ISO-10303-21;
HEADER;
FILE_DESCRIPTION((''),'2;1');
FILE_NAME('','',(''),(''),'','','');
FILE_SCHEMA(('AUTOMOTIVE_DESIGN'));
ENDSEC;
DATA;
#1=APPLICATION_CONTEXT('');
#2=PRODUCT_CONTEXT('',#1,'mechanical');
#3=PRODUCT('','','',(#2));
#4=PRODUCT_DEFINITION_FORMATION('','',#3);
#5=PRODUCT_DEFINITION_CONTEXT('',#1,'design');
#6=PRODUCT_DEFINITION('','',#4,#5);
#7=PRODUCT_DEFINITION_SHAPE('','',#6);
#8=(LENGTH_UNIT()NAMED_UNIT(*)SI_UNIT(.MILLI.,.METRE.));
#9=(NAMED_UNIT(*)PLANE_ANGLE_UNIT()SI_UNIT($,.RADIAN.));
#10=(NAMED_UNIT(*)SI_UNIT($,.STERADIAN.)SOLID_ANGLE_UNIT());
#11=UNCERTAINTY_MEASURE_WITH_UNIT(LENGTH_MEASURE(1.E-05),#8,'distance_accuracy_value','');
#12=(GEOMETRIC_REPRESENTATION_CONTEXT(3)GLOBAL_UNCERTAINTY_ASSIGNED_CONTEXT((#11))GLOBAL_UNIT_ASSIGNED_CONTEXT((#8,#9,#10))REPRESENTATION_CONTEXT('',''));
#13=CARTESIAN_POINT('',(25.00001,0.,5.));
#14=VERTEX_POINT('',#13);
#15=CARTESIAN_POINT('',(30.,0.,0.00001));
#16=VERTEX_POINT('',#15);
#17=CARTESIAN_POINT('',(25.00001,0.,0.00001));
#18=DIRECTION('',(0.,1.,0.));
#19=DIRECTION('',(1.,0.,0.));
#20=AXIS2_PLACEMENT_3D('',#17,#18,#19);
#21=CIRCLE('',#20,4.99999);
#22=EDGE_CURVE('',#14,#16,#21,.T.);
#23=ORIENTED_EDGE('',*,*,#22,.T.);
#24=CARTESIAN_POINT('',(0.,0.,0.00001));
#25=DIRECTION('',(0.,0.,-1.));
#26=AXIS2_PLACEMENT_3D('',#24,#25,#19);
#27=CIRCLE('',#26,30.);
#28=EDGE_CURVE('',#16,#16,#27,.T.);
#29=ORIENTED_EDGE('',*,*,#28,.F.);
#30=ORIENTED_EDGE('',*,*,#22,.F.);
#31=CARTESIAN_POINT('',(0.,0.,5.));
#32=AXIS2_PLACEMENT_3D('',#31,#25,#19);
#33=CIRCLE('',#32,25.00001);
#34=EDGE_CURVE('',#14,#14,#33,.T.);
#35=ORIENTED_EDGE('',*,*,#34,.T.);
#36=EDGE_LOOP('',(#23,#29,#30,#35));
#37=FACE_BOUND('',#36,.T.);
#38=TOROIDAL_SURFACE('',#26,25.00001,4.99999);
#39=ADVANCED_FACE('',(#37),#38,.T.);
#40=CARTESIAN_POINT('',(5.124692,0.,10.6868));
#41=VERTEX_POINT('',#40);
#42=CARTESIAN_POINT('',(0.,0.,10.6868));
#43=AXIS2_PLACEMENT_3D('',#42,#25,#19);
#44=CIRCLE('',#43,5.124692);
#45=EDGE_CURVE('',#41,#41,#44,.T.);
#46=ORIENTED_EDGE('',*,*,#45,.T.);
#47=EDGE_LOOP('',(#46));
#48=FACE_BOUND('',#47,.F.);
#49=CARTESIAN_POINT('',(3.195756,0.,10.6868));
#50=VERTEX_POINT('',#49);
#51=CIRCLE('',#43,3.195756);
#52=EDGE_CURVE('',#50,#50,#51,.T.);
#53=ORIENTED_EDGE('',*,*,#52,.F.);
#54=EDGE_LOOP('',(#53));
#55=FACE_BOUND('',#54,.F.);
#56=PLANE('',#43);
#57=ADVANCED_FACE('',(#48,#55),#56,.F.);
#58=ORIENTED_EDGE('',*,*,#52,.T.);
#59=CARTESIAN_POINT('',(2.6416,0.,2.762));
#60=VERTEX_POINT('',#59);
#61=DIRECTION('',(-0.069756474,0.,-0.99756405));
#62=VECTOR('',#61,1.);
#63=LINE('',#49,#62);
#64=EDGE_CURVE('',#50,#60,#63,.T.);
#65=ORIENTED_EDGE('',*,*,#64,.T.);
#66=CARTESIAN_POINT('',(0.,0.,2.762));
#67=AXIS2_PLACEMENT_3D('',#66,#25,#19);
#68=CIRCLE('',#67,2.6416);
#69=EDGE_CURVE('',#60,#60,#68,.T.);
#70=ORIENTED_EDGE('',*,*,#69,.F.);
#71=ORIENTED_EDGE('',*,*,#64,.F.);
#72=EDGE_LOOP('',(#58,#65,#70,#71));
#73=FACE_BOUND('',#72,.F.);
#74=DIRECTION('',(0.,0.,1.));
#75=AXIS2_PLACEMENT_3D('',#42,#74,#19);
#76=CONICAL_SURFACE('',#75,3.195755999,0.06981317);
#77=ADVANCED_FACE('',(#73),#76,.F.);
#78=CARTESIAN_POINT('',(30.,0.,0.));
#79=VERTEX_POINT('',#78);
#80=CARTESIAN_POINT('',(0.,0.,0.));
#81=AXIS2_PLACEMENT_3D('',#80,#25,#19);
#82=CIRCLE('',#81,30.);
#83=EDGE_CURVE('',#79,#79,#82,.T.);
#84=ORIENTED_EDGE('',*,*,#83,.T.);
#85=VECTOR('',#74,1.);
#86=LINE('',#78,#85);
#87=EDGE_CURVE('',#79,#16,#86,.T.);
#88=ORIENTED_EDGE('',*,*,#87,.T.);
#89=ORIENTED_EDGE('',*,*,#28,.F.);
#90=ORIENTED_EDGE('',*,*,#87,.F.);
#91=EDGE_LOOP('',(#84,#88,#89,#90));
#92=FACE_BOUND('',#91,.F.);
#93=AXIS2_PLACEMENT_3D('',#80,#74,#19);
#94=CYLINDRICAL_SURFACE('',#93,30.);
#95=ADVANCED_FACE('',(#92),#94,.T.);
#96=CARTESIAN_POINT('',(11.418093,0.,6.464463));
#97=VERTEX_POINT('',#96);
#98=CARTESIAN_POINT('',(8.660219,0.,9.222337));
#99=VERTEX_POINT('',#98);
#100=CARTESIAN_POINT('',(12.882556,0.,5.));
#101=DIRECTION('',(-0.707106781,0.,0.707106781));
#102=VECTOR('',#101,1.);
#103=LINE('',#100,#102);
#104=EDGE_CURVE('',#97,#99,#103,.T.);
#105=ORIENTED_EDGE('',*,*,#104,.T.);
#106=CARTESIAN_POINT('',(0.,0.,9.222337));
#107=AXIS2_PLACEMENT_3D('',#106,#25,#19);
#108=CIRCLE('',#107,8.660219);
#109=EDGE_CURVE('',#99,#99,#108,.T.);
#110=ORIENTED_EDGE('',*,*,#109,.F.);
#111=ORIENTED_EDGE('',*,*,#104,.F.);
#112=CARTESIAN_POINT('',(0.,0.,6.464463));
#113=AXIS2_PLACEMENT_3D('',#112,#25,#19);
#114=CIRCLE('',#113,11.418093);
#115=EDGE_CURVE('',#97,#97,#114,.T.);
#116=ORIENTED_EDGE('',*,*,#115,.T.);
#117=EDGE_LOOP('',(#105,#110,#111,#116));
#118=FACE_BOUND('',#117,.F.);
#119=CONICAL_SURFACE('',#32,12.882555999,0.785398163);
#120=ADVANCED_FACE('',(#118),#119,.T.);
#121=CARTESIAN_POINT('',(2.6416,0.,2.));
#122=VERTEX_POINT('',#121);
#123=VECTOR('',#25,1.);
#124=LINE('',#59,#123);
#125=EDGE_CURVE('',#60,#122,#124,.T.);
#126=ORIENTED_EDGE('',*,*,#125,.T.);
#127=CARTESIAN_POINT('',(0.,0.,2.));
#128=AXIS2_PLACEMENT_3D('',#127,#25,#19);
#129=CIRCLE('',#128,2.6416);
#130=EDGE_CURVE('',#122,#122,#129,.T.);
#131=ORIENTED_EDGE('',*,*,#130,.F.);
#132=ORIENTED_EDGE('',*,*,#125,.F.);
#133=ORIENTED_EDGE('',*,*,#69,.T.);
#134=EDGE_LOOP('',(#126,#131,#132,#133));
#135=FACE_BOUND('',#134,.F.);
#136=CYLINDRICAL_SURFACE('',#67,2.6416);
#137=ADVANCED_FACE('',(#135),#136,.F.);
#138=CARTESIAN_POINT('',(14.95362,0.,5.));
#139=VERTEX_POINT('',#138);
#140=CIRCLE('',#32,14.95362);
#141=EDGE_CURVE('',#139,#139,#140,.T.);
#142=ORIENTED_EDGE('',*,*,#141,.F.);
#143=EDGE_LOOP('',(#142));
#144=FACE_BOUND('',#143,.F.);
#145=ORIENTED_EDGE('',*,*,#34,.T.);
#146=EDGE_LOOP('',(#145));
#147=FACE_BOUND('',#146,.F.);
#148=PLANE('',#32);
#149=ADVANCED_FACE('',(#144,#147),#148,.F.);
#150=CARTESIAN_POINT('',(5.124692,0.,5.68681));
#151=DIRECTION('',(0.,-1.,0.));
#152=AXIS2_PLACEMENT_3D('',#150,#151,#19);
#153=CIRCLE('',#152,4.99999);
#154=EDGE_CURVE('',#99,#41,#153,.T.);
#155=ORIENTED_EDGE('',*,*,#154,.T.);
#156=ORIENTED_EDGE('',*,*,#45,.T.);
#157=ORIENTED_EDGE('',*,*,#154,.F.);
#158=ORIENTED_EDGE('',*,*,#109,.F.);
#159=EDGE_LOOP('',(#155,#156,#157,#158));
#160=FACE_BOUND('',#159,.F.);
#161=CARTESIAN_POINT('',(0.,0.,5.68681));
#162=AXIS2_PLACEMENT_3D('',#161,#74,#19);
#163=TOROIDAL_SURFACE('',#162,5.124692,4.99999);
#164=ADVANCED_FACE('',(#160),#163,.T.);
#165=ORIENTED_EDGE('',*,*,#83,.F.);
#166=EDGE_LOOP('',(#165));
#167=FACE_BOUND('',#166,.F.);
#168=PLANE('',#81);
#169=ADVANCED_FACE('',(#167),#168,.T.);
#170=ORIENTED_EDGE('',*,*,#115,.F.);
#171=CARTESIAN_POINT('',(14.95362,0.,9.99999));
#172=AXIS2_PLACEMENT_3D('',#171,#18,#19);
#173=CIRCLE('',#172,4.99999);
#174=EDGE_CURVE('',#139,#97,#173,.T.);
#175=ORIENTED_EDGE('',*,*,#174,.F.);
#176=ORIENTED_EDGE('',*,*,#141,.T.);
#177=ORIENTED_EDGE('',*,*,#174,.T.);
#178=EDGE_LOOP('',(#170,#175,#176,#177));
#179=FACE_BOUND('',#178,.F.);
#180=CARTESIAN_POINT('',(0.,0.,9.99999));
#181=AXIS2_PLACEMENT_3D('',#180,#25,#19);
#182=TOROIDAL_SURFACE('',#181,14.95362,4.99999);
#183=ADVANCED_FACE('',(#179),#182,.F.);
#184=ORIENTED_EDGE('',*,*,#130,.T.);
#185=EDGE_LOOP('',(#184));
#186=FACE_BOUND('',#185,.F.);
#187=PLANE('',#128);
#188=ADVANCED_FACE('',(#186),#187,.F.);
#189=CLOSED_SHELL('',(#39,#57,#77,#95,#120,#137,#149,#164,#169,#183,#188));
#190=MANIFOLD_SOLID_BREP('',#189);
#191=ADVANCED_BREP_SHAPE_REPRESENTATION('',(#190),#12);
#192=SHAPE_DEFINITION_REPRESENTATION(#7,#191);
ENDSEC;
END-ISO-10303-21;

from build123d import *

# Parameters (mm, degrees)
F2_R = 4.99999


# Not quite as in the source:
# - a fillet or chamfer is up to 0.001 mm smaller than in the source, because OpenCascade refuses the exact size


with BuildPart() as f1:
    # F0 (on Front) → F1 (revolve)
    with BuildSketch(Plane.XZ):
        Polygon((30, 5), (12.8825559993, 5), (7.1957559993, 10.6868), (3.1957559993, 10.6868), (2.6416, 2.762), (2.6416, 2), (0, 2), (0, 0), (30, 0), align=None)
    revolve(axis=Axis((0, 0, -11.1281685531), (0, 0, -1)))

    # F2 (radius 5 in the source; OpenCascade refuses exactly that, so slightly less here)
    f2_edges = [f1.edges().sort_by_distance(p)[0] for p in [
        (-12.882556, 0, 5),
        (-30, 0, 5),
        (-7.195756, 0, 10.6868),
    ]]
    fillet(f2_edges, radius=F2_R)


solid = f1.part
